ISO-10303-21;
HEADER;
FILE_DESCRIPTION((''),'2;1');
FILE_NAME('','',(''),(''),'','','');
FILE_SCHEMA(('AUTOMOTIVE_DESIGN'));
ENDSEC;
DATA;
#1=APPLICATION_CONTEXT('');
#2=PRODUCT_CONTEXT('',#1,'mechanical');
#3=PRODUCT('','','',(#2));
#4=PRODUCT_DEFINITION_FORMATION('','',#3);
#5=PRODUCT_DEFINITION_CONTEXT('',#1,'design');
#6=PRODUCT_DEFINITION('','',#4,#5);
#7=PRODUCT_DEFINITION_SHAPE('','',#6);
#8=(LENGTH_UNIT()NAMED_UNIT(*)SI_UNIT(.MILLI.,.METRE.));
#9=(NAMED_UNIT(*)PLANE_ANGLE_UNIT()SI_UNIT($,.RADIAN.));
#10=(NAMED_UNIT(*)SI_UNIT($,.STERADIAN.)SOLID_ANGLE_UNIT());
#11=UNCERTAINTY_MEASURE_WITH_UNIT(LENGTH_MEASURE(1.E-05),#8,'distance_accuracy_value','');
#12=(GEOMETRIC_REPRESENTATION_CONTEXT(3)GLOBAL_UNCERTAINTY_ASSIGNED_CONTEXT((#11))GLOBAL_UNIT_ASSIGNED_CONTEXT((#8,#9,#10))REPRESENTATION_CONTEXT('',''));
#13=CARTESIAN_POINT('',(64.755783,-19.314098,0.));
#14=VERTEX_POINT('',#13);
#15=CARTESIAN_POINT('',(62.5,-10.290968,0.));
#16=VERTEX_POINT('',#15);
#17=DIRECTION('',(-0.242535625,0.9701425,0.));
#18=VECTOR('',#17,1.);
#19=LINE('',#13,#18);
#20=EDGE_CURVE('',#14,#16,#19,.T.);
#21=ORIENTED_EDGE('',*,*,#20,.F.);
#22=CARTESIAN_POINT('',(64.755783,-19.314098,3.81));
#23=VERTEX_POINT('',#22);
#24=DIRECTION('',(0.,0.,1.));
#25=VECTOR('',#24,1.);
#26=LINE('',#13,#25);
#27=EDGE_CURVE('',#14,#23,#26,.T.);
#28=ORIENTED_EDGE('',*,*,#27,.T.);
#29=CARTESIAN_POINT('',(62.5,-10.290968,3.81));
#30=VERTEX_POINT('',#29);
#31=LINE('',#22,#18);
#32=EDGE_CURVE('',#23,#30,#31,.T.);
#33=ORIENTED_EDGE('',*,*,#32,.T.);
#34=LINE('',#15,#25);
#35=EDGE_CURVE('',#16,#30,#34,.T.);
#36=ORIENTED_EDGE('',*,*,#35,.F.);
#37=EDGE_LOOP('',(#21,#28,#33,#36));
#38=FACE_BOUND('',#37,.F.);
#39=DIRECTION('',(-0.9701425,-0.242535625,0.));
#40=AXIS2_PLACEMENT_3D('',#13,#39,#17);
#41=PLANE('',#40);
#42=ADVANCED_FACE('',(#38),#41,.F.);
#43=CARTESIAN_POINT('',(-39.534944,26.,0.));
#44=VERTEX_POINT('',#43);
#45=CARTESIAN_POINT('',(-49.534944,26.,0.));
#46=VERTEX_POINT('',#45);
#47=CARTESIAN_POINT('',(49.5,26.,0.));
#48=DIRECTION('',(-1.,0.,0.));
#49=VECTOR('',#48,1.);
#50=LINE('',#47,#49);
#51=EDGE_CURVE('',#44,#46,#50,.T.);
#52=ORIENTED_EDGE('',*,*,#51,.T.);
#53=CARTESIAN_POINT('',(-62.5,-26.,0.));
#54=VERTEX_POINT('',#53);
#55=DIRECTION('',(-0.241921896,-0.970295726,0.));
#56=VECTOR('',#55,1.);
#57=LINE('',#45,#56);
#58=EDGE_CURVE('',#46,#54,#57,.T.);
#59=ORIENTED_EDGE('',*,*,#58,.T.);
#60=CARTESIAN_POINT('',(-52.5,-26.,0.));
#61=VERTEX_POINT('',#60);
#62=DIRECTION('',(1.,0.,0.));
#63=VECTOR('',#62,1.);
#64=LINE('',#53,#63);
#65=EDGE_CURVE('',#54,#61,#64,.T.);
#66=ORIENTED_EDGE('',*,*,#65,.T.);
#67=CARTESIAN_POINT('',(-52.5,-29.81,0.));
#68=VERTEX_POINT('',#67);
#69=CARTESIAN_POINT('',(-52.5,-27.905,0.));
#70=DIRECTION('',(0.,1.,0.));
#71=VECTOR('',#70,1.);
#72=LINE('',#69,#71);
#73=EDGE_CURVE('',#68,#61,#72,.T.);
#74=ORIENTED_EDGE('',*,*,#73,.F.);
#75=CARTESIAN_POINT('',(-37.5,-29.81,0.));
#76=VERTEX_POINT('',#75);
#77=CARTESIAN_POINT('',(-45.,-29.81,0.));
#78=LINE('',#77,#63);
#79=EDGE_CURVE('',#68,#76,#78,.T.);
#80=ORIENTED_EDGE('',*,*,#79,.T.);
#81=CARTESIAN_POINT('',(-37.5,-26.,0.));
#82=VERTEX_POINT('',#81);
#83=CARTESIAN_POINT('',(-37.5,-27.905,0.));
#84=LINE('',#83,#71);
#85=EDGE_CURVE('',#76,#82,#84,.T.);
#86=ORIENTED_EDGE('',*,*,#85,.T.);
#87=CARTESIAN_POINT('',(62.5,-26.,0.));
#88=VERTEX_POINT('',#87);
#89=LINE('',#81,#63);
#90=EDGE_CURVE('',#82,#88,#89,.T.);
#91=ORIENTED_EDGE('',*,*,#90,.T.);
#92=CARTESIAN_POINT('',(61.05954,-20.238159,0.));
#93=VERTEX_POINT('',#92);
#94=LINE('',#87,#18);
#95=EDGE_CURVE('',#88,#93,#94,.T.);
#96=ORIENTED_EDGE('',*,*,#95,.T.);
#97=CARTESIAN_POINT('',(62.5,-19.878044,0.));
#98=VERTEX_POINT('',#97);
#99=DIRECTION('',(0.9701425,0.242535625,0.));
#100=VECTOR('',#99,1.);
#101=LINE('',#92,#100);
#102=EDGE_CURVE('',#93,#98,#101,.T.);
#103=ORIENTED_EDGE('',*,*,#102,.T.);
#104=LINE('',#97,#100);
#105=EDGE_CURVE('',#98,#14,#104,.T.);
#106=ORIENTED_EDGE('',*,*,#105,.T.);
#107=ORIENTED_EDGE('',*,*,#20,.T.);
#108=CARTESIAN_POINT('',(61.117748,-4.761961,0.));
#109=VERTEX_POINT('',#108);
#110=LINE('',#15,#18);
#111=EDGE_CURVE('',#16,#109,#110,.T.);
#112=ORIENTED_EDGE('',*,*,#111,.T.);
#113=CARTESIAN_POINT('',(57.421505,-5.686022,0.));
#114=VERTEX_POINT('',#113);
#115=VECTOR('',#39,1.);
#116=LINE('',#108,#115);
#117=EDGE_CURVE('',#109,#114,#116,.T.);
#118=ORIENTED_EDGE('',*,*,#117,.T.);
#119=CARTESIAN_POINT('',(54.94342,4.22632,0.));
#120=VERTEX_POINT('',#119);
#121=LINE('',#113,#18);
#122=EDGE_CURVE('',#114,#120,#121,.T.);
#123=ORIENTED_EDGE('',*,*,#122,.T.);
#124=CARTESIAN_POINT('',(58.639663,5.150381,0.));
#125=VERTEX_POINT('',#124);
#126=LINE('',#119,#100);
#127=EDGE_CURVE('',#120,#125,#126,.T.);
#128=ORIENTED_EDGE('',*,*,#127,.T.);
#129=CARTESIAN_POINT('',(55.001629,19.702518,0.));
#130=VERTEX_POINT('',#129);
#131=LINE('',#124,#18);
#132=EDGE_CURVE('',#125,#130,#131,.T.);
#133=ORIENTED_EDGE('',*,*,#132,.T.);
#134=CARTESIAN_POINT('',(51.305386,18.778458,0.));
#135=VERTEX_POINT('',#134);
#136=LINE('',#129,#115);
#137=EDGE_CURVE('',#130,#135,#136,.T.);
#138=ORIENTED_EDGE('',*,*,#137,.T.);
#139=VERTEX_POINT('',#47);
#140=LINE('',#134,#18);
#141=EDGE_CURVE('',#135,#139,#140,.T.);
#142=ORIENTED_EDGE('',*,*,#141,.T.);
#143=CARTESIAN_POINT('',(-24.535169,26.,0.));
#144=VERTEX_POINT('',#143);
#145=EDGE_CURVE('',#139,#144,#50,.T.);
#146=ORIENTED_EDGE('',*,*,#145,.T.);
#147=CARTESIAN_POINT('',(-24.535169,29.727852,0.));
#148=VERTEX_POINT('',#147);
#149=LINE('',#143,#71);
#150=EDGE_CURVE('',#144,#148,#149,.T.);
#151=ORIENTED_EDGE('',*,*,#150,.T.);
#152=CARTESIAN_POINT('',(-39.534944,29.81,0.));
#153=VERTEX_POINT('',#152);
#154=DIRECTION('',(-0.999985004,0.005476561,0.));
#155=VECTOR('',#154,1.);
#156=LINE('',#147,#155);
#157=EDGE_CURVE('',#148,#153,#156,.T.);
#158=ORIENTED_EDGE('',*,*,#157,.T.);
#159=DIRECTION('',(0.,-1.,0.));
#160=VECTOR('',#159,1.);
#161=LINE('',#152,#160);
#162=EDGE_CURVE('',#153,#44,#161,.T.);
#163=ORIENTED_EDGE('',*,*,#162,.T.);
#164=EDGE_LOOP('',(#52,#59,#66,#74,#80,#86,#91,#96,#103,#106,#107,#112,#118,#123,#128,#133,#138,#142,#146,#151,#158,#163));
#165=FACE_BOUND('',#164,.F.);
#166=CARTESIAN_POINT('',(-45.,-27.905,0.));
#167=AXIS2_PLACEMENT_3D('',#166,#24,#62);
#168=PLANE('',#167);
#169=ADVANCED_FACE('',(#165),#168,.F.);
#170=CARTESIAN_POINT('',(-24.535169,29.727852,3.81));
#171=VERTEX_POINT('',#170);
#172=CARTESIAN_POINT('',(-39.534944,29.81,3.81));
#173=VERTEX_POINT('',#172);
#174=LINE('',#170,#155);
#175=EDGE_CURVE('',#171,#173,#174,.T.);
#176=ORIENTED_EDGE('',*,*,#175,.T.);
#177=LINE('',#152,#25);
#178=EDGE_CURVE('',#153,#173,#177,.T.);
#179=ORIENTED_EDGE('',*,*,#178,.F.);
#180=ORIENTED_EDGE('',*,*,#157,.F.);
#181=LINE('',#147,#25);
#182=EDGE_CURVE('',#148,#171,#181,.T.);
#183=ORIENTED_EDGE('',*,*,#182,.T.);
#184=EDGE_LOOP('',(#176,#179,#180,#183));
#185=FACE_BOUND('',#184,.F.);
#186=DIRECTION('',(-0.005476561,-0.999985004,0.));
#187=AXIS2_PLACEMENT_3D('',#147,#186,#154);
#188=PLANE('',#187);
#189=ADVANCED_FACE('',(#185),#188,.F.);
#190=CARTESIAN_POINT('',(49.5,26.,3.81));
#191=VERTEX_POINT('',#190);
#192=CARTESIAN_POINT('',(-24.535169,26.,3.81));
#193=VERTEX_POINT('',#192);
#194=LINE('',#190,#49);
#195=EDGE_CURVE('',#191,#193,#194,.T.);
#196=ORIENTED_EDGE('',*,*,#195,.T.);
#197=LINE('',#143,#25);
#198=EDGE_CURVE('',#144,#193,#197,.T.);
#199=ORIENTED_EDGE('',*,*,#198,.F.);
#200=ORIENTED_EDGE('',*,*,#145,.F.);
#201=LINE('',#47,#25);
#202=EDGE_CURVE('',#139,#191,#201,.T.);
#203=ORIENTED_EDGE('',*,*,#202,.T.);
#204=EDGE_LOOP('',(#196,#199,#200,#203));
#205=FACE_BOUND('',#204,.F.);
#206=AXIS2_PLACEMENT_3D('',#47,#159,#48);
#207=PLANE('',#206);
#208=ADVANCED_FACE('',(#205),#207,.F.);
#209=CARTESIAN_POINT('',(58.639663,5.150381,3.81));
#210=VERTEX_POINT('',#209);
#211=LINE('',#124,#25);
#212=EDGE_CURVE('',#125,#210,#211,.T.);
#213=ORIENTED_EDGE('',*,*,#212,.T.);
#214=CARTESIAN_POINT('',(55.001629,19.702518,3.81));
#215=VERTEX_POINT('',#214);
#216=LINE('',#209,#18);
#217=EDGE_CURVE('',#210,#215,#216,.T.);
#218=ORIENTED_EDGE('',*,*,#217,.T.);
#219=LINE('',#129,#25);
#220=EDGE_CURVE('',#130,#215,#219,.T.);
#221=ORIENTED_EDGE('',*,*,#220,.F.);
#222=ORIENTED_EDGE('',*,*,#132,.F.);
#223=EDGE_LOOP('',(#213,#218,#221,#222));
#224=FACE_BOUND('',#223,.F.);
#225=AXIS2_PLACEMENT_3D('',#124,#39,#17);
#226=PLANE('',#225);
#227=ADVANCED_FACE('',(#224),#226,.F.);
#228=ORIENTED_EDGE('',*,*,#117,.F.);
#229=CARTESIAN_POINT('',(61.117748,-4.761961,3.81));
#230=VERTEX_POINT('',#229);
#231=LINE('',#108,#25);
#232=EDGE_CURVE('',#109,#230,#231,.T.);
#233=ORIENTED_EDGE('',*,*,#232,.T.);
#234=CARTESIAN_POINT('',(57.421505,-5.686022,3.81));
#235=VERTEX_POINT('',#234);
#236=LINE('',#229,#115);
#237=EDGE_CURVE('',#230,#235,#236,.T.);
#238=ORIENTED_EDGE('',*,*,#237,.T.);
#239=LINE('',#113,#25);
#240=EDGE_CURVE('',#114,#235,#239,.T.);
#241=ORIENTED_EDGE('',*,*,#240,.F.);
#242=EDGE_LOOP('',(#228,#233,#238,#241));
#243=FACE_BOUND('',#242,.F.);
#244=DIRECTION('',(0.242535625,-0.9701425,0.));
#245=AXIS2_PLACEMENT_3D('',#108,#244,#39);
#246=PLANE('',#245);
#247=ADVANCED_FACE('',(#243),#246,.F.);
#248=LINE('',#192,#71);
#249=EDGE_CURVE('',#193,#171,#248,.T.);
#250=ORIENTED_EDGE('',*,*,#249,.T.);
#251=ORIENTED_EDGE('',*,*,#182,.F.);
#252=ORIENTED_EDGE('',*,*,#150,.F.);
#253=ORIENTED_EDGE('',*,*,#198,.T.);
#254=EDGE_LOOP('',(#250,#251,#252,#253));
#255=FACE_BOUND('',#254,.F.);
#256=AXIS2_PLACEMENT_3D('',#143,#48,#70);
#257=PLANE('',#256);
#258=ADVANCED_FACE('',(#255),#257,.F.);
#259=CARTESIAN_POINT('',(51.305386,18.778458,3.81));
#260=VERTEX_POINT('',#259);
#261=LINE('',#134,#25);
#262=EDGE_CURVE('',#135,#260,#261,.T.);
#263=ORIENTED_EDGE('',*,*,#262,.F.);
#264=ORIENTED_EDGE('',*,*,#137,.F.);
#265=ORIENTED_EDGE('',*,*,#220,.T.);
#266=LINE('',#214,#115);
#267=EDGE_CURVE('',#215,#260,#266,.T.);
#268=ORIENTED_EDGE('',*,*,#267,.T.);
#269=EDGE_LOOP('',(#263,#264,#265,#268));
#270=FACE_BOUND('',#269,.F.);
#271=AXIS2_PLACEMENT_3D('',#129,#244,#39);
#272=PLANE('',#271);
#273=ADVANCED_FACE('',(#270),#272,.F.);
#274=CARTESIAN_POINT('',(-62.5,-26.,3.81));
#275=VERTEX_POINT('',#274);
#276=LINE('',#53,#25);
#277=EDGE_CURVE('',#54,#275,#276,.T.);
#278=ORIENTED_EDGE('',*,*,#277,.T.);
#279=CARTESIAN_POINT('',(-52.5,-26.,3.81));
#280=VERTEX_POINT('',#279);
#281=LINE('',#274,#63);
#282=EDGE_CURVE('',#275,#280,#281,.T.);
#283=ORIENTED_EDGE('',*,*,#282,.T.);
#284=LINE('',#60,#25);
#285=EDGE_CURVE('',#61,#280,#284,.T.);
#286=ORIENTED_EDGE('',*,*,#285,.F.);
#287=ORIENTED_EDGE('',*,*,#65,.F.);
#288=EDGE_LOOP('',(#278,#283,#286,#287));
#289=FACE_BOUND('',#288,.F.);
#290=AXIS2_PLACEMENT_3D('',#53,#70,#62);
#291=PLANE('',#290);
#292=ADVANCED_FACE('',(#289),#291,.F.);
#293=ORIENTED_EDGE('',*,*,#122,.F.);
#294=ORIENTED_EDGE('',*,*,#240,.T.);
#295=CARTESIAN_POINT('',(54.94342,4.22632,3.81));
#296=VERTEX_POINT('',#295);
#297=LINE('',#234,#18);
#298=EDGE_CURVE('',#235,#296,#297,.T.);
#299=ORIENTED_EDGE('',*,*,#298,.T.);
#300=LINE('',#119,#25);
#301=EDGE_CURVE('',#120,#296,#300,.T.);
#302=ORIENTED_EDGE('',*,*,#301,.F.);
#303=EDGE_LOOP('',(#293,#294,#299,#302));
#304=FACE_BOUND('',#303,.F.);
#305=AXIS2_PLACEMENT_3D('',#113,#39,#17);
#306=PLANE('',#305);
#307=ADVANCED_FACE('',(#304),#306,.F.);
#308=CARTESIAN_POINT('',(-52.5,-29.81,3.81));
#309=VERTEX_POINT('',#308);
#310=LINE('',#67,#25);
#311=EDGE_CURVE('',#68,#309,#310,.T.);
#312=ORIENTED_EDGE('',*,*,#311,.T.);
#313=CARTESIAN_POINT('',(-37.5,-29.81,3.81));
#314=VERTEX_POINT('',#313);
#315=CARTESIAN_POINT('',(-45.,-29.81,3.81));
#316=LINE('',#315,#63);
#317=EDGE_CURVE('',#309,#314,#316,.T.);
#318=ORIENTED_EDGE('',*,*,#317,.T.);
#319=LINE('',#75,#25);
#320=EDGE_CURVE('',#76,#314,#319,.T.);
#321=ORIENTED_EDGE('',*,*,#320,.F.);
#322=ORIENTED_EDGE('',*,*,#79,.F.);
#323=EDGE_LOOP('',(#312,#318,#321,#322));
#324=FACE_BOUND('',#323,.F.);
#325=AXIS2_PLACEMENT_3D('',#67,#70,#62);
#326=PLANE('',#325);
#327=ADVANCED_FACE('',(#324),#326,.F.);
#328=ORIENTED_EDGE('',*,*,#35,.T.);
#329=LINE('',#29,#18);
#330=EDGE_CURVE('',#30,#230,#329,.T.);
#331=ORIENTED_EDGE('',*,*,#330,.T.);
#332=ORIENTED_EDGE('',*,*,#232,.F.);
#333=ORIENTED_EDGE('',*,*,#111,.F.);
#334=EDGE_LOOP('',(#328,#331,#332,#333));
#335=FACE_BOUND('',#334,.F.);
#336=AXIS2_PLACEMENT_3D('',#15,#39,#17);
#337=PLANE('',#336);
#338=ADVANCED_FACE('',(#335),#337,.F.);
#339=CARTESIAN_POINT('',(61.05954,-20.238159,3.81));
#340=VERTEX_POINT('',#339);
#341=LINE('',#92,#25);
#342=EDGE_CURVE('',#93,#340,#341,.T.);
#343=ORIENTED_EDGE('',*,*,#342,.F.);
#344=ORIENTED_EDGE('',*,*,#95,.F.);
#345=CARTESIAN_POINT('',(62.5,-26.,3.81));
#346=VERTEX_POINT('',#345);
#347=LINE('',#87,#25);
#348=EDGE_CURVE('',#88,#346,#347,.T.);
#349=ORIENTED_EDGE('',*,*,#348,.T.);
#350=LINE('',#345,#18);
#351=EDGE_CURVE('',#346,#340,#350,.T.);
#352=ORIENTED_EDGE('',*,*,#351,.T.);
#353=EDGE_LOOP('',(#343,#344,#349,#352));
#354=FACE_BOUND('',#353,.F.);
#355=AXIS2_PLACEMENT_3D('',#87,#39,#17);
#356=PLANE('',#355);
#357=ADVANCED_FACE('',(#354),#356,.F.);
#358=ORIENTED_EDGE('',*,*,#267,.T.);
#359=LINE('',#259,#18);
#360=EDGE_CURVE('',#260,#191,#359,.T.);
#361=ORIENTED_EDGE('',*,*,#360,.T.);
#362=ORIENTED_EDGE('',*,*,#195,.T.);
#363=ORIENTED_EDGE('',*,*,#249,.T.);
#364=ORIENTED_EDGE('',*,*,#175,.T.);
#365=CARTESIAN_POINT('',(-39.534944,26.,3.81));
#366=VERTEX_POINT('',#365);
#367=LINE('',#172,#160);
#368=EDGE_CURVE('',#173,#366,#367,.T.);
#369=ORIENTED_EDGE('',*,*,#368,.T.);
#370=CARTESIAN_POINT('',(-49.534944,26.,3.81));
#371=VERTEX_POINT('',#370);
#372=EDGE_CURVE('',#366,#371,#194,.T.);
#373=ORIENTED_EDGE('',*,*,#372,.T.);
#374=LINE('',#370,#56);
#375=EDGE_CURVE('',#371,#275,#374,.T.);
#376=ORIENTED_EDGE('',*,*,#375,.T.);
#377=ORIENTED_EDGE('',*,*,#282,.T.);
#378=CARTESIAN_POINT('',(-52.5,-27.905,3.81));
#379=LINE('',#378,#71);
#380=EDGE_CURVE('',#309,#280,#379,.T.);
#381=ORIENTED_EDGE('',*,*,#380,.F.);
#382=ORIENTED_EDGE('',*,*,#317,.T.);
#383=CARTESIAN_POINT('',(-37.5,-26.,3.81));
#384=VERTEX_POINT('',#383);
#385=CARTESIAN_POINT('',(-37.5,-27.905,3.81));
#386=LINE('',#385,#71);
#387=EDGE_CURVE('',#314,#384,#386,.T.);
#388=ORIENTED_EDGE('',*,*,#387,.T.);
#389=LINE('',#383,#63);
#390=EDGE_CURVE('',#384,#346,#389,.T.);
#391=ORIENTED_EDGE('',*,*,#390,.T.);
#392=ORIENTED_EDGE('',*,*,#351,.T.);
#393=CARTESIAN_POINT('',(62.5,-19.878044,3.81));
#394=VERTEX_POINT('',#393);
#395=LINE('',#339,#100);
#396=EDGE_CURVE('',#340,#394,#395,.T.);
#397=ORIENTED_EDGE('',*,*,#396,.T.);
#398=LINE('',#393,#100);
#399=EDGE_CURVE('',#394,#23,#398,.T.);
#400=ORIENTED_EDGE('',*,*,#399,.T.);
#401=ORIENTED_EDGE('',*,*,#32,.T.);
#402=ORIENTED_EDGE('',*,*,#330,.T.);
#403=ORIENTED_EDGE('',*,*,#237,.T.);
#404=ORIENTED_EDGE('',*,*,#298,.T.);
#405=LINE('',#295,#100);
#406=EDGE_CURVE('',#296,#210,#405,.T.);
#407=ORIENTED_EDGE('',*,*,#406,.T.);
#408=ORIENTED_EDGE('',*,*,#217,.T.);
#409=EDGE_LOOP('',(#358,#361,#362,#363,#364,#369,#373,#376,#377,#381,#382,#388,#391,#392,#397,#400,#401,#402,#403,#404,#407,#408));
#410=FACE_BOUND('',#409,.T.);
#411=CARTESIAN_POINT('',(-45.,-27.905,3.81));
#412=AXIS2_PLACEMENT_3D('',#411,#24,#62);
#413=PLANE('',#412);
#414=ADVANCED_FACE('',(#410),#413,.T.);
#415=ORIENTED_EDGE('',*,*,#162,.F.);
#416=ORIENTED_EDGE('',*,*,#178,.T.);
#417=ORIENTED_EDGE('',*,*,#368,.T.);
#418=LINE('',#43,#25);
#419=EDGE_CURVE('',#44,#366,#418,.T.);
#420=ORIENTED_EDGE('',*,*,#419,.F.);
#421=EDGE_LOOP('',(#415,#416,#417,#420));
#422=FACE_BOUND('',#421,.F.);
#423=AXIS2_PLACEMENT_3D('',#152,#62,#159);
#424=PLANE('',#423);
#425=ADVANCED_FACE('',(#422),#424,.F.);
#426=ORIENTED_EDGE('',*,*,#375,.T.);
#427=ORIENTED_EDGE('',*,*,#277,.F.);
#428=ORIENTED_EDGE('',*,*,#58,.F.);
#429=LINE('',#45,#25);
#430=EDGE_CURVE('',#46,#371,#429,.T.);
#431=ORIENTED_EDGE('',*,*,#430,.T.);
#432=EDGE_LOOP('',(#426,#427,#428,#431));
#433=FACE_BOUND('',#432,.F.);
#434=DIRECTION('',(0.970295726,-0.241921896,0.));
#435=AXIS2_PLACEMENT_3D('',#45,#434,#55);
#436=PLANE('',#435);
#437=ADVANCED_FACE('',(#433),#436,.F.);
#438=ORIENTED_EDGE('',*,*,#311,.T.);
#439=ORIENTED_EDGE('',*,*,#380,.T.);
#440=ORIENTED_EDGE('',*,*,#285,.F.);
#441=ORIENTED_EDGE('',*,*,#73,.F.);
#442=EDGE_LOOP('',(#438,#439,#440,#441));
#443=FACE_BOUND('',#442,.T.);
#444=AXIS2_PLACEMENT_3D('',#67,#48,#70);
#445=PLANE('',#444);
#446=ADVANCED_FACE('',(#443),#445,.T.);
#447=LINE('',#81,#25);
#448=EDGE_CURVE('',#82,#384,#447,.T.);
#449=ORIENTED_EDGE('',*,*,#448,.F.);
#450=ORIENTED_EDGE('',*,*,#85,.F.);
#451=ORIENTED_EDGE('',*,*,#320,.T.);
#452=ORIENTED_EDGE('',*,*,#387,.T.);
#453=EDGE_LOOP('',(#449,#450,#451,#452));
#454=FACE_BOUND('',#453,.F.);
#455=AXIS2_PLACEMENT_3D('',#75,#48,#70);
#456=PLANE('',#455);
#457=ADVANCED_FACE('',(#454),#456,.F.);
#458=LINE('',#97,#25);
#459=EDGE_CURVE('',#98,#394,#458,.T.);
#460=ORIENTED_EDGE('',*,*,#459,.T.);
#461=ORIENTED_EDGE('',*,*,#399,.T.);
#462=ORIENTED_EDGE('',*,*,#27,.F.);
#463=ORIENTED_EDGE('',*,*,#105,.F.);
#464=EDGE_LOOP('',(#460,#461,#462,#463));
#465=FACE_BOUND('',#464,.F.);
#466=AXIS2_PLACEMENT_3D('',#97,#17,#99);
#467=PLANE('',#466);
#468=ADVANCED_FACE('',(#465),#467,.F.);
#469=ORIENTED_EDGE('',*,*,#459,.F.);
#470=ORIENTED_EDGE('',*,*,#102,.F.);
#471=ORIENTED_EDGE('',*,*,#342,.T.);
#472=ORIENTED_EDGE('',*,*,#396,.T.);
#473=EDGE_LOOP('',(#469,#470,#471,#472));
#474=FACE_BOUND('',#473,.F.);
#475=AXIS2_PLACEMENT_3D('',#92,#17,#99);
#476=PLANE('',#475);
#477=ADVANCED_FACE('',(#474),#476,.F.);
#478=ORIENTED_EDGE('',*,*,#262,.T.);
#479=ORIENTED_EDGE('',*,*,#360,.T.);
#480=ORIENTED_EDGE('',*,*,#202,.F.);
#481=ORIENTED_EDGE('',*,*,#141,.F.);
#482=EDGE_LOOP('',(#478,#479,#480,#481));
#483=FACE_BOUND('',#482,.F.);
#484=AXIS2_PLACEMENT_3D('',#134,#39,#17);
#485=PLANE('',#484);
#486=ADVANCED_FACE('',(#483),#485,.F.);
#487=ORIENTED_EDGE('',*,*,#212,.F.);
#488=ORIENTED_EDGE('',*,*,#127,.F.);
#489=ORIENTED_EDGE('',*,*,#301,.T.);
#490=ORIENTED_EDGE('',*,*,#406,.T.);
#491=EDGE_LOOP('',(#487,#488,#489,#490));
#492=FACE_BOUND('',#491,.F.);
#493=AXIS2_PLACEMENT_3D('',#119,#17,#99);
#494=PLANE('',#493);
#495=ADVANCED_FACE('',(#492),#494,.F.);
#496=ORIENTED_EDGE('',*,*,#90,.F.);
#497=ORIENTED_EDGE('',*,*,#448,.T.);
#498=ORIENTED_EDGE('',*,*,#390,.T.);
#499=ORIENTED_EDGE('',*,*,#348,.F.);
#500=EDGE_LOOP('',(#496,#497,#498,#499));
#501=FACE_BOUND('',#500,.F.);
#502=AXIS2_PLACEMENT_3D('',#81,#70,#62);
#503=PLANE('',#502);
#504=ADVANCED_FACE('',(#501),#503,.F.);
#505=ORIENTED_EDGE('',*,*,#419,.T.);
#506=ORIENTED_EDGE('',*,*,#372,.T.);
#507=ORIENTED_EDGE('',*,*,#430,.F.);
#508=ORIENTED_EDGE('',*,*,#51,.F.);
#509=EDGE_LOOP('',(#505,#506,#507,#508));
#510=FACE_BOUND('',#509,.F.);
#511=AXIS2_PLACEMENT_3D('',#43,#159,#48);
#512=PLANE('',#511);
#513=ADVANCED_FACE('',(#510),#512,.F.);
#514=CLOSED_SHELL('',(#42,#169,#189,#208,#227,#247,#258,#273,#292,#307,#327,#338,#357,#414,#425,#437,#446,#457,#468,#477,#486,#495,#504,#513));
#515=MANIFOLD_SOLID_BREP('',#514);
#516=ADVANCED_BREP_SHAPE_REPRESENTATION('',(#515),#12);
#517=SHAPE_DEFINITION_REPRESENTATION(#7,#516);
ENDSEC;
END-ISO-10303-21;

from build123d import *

# Parameters (mm, degrees)
F0_W     = 15
F0_H     = 3.81
F1_DEPTH = 3.81


# Not quite as in the source:
# - a feature names something its author has since deleted; it is built from what else it names


with BuildPart() as f1:
    # F0 (on Top) → F1 (new body)
    with BuildSketch(Plane.XY):
        with Locations((-45, -27.905)):
            Rectangle(F0_W, F0_H)
        Polygon((-37.5, -26), (62.5, -26), (61.059539805, -20.23815922), (57.4215054295, -5.6860217178), (54.9434199682, 4.226320127), (51.3053855927, 18.7784576292), (49.5, 26), (-24.5351687992, 26), (-39.5349438522, 26), (-49.5349438522, 26), (-62.5, -26), (-52.5, -26), align=None)
        Polygon((61.059539805, -20.23815922), (62.5, -19.8780441712), (62.5, -10.2909675664), (61.117748355, -4.7619609864), (57.4215054295, -5.6860217178), align=None)
        Polygon((51.3053855927, 18.7784576292), (54.9434199682, 4.226320127), (58.6396628938, 5.1503808584), (55.0016285183, 19.7025183606), align=None)
        Polygon((62.5, -10.2909675664), (62.5, -19.8780441712), (64.7557827306, -19.3140984886), align=None)
        Polygon((-39.5349438522, 29.81), (-39.5349438522, 26), (-24.5351687992, 26), (-24.5351687992, 29.7278515898), align=None)
    extrude(amount=F1_DEPTH)


solid = f1.part
